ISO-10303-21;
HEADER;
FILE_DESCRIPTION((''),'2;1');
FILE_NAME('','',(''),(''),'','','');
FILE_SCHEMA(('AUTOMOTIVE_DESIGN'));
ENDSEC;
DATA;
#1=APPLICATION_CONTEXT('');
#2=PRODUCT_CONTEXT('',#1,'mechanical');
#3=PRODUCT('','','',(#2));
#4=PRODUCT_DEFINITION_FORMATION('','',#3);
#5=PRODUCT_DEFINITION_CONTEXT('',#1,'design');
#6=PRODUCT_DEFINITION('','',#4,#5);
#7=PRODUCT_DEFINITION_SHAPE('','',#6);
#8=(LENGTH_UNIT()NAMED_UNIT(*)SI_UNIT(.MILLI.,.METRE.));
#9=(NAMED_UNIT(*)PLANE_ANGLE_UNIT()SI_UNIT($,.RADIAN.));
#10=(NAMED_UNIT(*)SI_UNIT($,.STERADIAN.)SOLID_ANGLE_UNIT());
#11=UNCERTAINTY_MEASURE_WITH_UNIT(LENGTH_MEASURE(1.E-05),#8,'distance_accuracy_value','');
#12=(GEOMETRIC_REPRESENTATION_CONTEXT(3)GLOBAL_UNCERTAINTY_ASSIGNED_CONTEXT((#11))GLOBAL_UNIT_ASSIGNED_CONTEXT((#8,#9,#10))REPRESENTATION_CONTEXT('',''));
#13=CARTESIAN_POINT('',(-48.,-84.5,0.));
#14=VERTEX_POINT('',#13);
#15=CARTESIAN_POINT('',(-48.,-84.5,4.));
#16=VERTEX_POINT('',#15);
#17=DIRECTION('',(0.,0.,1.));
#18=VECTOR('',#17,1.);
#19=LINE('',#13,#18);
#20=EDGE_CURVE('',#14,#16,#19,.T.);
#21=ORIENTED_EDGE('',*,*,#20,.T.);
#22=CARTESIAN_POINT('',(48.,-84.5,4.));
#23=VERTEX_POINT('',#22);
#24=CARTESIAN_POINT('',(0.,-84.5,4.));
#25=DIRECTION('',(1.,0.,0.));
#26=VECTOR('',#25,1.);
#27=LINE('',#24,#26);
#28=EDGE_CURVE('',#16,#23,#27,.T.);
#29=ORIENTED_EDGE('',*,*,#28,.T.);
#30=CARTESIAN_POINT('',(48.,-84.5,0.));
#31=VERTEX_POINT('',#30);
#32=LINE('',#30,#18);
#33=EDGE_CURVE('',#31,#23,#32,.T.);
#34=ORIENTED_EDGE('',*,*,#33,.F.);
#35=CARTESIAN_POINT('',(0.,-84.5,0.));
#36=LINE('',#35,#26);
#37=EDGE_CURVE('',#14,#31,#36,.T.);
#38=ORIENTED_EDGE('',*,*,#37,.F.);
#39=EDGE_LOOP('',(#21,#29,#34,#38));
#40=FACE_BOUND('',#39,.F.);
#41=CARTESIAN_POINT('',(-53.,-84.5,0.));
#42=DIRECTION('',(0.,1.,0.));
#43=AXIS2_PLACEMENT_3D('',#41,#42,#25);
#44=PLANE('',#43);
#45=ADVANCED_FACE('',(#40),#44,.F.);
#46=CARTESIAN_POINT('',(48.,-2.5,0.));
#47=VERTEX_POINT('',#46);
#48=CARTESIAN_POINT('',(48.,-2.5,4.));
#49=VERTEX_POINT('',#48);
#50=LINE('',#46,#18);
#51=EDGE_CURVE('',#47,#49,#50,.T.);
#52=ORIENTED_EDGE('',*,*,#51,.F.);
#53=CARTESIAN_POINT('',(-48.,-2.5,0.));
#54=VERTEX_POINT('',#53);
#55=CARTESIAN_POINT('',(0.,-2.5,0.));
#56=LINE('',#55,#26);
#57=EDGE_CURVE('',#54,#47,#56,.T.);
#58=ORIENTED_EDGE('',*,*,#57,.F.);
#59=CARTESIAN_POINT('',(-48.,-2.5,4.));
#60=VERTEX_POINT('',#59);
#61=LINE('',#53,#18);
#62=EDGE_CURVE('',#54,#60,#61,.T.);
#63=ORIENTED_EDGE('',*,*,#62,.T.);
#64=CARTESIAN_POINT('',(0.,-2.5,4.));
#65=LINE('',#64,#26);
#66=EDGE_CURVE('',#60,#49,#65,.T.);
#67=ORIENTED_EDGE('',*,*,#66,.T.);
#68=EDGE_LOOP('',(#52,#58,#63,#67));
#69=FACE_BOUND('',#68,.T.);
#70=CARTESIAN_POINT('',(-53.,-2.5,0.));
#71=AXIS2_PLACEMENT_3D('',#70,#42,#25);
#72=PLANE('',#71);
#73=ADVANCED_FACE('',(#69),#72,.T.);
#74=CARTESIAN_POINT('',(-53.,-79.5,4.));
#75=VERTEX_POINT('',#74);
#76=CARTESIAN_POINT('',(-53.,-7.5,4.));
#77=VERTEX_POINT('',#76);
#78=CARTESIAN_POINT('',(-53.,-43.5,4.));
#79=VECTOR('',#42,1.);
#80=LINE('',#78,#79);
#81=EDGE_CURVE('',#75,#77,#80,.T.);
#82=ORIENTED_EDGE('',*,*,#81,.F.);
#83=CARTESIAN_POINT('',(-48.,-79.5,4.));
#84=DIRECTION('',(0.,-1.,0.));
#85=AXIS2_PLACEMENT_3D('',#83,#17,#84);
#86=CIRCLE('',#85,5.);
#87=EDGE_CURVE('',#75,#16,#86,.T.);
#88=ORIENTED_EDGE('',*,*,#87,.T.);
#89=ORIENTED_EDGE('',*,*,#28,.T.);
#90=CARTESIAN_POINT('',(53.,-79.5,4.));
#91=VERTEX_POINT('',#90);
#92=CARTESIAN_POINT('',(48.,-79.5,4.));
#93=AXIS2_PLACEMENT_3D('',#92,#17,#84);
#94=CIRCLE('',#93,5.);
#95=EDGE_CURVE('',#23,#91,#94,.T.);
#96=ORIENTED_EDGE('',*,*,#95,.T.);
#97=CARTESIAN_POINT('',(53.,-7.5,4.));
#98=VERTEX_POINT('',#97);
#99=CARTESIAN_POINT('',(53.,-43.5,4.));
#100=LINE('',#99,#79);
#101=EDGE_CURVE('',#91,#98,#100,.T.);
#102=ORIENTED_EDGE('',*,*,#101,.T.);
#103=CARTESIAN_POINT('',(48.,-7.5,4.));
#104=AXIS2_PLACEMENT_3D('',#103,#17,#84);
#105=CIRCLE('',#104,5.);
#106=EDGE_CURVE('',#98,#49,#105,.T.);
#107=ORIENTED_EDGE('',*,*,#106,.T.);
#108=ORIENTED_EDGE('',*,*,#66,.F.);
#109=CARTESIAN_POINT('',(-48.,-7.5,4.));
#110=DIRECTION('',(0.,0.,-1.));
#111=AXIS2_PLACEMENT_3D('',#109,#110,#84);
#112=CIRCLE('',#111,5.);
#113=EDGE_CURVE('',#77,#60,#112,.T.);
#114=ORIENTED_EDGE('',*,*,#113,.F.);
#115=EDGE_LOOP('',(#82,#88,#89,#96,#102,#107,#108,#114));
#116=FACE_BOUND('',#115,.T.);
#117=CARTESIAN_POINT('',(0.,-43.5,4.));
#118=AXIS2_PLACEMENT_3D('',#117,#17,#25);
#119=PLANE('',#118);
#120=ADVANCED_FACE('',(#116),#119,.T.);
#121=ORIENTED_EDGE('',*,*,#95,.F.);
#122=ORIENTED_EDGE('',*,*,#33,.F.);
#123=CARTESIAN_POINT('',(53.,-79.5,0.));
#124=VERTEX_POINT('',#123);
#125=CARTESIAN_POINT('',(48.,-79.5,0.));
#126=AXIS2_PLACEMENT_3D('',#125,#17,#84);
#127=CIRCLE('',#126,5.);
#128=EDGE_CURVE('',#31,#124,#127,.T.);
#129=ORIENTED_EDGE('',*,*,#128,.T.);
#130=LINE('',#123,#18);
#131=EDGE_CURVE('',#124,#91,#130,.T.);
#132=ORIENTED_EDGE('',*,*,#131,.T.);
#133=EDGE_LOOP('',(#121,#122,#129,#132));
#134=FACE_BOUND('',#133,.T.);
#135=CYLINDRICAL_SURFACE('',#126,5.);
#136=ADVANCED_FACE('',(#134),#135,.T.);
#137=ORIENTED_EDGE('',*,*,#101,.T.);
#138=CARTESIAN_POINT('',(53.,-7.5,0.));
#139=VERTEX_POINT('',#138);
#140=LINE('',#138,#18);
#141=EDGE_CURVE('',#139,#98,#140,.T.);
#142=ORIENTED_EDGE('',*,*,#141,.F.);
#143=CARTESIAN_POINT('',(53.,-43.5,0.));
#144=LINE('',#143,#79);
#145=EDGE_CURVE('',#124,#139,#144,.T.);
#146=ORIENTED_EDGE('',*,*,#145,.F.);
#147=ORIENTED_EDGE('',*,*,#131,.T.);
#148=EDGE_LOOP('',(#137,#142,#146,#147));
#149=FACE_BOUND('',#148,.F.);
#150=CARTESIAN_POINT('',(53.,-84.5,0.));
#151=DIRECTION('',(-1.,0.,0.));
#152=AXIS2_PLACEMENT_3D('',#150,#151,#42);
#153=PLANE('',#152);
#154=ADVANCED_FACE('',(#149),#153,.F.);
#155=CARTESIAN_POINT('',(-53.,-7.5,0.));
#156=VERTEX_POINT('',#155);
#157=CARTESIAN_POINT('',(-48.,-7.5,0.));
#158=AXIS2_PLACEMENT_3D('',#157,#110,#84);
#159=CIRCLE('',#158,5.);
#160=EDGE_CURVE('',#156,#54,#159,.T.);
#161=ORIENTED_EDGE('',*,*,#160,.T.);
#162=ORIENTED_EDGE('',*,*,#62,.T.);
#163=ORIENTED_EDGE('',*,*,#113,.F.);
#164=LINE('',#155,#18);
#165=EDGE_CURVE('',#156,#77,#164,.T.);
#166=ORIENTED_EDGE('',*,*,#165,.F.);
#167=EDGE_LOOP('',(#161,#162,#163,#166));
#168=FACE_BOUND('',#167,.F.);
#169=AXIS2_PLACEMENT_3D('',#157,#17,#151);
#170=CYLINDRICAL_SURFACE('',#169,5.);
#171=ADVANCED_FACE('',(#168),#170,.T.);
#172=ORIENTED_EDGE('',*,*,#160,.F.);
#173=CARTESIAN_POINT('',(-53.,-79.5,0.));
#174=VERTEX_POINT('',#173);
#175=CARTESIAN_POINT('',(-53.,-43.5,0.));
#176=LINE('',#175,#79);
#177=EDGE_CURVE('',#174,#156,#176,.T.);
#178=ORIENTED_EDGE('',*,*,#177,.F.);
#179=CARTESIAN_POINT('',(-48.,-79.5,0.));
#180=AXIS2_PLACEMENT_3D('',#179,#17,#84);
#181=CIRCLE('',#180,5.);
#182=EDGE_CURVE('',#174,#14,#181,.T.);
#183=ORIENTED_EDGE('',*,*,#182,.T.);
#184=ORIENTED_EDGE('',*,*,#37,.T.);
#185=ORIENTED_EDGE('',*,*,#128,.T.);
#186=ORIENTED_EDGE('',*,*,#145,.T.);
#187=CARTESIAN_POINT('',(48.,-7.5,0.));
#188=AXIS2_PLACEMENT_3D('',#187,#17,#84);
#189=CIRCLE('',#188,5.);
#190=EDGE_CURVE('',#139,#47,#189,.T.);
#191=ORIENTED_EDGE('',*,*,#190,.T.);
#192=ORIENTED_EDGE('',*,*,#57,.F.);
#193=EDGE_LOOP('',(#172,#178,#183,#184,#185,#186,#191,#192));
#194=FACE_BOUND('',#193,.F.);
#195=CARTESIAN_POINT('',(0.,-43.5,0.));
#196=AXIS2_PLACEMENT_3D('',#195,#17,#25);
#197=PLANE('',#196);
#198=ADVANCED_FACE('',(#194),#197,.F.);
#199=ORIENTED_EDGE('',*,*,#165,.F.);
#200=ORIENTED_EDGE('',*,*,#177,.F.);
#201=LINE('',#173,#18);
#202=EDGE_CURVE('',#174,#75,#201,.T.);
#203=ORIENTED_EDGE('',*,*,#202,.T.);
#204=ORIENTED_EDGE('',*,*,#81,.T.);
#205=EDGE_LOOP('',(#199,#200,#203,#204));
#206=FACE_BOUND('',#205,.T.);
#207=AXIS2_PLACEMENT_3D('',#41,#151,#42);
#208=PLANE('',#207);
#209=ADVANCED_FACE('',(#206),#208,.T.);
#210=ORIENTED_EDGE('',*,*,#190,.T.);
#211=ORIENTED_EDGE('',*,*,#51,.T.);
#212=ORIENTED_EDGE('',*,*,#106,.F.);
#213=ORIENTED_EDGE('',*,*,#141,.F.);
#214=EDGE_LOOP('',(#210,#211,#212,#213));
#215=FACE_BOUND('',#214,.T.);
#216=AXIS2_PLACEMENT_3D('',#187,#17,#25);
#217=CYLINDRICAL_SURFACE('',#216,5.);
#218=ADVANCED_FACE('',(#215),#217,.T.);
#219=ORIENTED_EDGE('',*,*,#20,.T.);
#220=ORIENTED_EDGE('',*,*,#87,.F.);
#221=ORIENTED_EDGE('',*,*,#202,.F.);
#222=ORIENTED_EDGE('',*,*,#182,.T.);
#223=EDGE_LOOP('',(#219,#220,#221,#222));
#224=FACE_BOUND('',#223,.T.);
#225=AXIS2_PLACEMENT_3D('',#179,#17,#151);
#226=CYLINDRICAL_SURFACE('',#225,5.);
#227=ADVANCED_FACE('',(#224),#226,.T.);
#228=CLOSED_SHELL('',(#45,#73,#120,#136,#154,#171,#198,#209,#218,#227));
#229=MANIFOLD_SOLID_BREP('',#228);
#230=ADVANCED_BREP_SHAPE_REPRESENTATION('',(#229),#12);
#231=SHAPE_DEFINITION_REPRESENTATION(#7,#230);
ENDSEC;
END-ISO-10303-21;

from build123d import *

# Parameters (mm, degrees)
F0_W     = 106
F0_H     = 82
F1_DEPTH = 4
F2_R     = 5


# Not quite as in the source:
# - a feature names something its author has since deleted; it is built from what else it names


with BuildPart() as f1:
    # F0 (on Top) → F1 (new body)
    with BuildSketch(Plane.XY):
        with Locations((0, -43.5)):
            Rectangle(F0_W, F0_H)
    extrude(amount=F1_DEPTH)

    # F2
    f2_edges = [f1.edges().sort_by_distance(p)[0] for p in [
        (53, -84.5, 2),
        (-53, -84.5, 2),
        (-53, -2.5, 2),
        (53, -2.5, 2),
    ]]
    fillet(f2_edges, radius=F2_R)


solid = f1.part
